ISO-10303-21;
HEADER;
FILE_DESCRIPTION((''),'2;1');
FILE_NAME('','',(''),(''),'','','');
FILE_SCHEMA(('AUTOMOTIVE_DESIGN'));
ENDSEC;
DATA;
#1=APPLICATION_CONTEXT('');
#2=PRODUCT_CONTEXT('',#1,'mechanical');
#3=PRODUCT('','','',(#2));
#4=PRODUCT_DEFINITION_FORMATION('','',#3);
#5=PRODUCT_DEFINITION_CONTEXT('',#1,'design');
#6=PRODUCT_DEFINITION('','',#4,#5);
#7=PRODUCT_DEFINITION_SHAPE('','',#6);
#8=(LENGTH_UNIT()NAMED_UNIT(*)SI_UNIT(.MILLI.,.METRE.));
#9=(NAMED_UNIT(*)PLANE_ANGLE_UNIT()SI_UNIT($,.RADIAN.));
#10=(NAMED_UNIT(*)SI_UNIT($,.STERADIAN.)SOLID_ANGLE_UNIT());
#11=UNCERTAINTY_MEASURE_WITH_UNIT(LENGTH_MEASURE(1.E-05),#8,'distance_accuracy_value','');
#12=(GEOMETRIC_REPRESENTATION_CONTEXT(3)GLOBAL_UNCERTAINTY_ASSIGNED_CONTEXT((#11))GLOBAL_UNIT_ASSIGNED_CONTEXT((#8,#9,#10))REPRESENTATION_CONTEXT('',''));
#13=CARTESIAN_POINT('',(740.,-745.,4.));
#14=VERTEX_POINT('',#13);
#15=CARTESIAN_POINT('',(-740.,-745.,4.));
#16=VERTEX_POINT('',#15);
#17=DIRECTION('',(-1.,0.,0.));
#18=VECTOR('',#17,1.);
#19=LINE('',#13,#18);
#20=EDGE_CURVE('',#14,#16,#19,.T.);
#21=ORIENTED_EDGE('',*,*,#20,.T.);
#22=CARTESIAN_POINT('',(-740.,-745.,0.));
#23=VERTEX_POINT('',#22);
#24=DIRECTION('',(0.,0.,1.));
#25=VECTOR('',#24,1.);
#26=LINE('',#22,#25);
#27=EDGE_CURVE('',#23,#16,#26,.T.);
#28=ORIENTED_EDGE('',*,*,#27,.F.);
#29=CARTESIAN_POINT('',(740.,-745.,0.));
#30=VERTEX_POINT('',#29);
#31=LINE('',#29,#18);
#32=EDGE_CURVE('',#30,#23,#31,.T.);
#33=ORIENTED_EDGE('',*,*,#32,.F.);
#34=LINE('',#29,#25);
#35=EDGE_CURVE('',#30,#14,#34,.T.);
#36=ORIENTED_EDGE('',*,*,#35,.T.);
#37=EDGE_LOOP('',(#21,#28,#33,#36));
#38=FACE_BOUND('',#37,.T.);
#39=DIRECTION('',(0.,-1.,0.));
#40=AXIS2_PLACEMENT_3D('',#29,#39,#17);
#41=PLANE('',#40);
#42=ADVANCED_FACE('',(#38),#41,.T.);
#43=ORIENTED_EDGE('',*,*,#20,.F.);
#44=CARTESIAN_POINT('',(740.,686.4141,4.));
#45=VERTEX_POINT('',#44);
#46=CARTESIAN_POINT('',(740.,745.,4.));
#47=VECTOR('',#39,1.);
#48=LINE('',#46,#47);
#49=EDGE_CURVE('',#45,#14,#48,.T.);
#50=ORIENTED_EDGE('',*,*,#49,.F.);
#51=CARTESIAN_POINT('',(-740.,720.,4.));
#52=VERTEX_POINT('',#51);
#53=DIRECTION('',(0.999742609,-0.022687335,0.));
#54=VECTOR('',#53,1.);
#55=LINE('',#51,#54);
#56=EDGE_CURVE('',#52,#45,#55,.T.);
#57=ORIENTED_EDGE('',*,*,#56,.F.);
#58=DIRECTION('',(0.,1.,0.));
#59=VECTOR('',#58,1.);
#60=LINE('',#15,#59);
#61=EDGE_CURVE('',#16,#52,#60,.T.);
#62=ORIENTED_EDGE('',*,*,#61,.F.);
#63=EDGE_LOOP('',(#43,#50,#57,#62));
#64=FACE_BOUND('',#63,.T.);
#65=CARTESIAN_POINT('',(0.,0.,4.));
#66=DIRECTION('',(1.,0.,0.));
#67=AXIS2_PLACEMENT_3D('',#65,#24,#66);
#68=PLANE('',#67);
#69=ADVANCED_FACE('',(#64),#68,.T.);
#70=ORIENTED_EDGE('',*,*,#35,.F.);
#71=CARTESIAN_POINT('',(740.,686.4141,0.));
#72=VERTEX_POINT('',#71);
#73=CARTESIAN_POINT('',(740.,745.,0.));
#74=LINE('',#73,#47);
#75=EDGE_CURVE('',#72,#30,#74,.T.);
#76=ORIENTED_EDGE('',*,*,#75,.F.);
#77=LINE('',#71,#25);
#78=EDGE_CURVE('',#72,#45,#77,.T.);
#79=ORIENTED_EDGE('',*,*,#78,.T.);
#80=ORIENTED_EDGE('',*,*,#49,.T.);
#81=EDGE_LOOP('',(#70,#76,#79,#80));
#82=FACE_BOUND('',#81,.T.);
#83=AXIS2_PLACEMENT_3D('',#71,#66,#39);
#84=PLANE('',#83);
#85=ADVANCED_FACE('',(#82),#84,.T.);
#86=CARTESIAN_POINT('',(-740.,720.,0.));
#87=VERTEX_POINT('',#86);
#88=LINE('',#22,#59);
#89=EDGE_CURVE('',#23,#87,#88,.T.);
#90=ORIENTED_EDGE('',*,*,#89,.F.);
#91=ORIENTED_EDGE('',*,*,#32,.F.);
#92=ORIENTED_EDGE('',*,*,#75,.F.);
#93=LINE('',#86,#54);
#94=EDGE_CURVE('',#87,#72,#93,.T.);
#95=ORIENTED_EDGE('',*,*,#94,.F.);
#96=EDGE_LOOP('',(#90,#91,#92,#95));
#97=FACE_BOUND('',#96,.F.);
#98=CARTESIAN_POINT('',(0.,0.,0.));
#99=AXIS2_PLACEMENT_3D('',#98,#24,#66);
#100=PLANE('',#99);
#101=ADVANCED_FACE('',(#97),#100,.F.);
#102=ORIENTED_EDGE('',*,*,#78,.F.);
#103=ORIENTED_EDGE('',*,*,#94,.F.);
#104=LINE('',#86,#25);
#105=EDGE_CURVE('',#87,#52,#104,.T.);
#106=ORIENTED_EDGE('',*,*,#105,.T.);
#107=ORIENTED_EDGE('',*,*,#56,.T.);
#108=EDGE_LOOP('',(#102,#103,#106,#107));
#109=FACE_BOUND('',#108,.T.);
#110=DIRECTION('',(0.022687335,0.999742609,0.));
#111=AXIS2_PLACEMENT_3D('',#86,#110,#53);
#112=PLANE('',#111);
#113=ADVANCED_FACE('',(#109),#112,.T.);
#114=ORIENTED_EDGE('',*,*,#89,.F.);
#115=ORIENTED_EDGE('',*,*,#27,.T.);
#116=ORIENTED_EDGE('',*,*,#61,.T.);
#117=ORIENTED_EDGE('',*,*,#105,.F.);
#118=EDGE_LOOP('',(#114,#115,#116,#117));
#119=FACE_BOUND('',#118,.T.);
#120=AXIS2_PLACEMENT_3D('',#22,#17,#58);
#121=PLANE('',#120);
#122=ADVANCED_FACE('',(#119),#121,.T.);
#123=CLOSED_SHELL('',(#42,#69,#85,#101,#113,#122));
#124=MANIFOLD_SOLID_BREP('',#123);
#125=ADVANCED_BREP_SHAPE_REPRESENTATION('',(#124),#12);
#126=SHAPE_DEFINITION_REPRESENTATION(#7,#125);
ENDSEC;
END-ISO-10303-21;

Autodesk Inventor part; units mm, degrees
ref_plane "YZ Plane" through (0, 0, 0) normal (1, 0, 0) x (0, 1, 0)
ref_plane "XZ Plane" through (0, 0, 0) normal (0, 1, 0) x (-1, 0, 0)
ref_plane "XY Plane" through (0, 0, 0) normal (0, 0, 1) x (1, 0, 0)
sketch "Sketch1" plane through (0, 0, 0) normal (0, 0, 1) x (1, 0, 0)
  line L0 (740, -745) -> (-740, -745)
  line L1 (-740, -745) -> (-740, 745)
  line L2 (-740, 745) -> (740, 745)
  line L3 (740, 745) -> (740, -745)
  line L4 (740, -745) -> (-740, 745) construction
  line L5 (-740, -745) -> (740, 745) construction
  line L6 (-740, 720) -> (740, 686.4141)
  point P0 (0, 0)
  dimension "d0" = 1480
  dimension "d1" = 1490
  dimension "d3" = 1.3
  dimension "d8" = 1465
extrude "Plate1" add sketch "Sketch1" along normal blind 4 contours L0 L1 L6 L3
sketch "Эскиз2" plane through (0, 0, 0) normal (0, 0, -1) x (-1, 0, 0)
  line L0 (566.7109, -523.3382) -> (566.7109, -1021.4744) construction
  line L1 (566.7109, -1021.4744) -> (527.0836, -1021.4744) construction
  line L2 (527.0836, -1021.4744) -> (527.0836, -523.3382) construction
  line L3 (527.0836, -523.3382) -> (566.7109, -523.3382) construction
  line L4 (710, -489.5) -> (710, -485.5) projected
  line L5 (710, 7.1667) -> (710, 11.1667) projected
  line L6 (710, 503.8333) -> (710, 507.8333) projected
  line L7 (210.5058, -493) -> (210.5058, -590) projected
  line L8 (210.5058, -590) -> (206.5068, -590) projected
  line L9 (-289.6228, -493) -> (-289.6228, -590) projected
  line L10 (-289.6228, -590) -> (-293.6218, -590) projected
  line L11 (-739.3197, -489.5) -> (-710, -489.5) projected
  line L12 (-710, -489.5) -> (-710, -485.5) projected
  line L13 (-739.3197, 7.1667) -> (-710, 7.1667) projected
  line L14 (-710, 7.1667) -> (-710, 11.1667) projected
  line L15 (-739.3197, 503.8333) -> (-710, 503.8333) projected
  line L16 (-710, 503.8333) -> (-710, 507.8333) projected
  line L17 (-289.6228, 715) -> (-289.6228, 511) projected
  line L18 (210.5058, 715) -> (210.5058, 511) projected
  line L19 (710, -489.5) -> (680, -489.5)
  line L20 (710, 7.1667) -> (680, 7.1667)
  line L21 (710, 503.8333) -> (680, 503.8333)
  point P0 (0, 0)
  dimension "d5" = 30
  dimension "d9" = 30
  dimension "d10" = 30
mark "Маркировка1"
equation "\"d0\" = Лист_ширина"
equation "\"d2\" = Thickness"
equation "\"BendRadius\" = Thickness"
equation "\"BendReliefWidth\" = Thickness"
equation "\"BendReliefDepth\" = 0.5 * Thickness"
equation "\"CornerReliefSize\" = 4 * Thickness"
equation "\"MinimumRemnant\" = 2 * Thickness"
equation "\"TransitionRadius\" = BendRadius"
equation "\"JacobiRadiusSize\" = BendRadius"
equation "\"GapSize\" = Thickness"
equation "\"Лист_ширина\" = 1480"
equation "\"Thickness\" = 4"
properties part number "GBK 2339 shield 9" material "Steel"
